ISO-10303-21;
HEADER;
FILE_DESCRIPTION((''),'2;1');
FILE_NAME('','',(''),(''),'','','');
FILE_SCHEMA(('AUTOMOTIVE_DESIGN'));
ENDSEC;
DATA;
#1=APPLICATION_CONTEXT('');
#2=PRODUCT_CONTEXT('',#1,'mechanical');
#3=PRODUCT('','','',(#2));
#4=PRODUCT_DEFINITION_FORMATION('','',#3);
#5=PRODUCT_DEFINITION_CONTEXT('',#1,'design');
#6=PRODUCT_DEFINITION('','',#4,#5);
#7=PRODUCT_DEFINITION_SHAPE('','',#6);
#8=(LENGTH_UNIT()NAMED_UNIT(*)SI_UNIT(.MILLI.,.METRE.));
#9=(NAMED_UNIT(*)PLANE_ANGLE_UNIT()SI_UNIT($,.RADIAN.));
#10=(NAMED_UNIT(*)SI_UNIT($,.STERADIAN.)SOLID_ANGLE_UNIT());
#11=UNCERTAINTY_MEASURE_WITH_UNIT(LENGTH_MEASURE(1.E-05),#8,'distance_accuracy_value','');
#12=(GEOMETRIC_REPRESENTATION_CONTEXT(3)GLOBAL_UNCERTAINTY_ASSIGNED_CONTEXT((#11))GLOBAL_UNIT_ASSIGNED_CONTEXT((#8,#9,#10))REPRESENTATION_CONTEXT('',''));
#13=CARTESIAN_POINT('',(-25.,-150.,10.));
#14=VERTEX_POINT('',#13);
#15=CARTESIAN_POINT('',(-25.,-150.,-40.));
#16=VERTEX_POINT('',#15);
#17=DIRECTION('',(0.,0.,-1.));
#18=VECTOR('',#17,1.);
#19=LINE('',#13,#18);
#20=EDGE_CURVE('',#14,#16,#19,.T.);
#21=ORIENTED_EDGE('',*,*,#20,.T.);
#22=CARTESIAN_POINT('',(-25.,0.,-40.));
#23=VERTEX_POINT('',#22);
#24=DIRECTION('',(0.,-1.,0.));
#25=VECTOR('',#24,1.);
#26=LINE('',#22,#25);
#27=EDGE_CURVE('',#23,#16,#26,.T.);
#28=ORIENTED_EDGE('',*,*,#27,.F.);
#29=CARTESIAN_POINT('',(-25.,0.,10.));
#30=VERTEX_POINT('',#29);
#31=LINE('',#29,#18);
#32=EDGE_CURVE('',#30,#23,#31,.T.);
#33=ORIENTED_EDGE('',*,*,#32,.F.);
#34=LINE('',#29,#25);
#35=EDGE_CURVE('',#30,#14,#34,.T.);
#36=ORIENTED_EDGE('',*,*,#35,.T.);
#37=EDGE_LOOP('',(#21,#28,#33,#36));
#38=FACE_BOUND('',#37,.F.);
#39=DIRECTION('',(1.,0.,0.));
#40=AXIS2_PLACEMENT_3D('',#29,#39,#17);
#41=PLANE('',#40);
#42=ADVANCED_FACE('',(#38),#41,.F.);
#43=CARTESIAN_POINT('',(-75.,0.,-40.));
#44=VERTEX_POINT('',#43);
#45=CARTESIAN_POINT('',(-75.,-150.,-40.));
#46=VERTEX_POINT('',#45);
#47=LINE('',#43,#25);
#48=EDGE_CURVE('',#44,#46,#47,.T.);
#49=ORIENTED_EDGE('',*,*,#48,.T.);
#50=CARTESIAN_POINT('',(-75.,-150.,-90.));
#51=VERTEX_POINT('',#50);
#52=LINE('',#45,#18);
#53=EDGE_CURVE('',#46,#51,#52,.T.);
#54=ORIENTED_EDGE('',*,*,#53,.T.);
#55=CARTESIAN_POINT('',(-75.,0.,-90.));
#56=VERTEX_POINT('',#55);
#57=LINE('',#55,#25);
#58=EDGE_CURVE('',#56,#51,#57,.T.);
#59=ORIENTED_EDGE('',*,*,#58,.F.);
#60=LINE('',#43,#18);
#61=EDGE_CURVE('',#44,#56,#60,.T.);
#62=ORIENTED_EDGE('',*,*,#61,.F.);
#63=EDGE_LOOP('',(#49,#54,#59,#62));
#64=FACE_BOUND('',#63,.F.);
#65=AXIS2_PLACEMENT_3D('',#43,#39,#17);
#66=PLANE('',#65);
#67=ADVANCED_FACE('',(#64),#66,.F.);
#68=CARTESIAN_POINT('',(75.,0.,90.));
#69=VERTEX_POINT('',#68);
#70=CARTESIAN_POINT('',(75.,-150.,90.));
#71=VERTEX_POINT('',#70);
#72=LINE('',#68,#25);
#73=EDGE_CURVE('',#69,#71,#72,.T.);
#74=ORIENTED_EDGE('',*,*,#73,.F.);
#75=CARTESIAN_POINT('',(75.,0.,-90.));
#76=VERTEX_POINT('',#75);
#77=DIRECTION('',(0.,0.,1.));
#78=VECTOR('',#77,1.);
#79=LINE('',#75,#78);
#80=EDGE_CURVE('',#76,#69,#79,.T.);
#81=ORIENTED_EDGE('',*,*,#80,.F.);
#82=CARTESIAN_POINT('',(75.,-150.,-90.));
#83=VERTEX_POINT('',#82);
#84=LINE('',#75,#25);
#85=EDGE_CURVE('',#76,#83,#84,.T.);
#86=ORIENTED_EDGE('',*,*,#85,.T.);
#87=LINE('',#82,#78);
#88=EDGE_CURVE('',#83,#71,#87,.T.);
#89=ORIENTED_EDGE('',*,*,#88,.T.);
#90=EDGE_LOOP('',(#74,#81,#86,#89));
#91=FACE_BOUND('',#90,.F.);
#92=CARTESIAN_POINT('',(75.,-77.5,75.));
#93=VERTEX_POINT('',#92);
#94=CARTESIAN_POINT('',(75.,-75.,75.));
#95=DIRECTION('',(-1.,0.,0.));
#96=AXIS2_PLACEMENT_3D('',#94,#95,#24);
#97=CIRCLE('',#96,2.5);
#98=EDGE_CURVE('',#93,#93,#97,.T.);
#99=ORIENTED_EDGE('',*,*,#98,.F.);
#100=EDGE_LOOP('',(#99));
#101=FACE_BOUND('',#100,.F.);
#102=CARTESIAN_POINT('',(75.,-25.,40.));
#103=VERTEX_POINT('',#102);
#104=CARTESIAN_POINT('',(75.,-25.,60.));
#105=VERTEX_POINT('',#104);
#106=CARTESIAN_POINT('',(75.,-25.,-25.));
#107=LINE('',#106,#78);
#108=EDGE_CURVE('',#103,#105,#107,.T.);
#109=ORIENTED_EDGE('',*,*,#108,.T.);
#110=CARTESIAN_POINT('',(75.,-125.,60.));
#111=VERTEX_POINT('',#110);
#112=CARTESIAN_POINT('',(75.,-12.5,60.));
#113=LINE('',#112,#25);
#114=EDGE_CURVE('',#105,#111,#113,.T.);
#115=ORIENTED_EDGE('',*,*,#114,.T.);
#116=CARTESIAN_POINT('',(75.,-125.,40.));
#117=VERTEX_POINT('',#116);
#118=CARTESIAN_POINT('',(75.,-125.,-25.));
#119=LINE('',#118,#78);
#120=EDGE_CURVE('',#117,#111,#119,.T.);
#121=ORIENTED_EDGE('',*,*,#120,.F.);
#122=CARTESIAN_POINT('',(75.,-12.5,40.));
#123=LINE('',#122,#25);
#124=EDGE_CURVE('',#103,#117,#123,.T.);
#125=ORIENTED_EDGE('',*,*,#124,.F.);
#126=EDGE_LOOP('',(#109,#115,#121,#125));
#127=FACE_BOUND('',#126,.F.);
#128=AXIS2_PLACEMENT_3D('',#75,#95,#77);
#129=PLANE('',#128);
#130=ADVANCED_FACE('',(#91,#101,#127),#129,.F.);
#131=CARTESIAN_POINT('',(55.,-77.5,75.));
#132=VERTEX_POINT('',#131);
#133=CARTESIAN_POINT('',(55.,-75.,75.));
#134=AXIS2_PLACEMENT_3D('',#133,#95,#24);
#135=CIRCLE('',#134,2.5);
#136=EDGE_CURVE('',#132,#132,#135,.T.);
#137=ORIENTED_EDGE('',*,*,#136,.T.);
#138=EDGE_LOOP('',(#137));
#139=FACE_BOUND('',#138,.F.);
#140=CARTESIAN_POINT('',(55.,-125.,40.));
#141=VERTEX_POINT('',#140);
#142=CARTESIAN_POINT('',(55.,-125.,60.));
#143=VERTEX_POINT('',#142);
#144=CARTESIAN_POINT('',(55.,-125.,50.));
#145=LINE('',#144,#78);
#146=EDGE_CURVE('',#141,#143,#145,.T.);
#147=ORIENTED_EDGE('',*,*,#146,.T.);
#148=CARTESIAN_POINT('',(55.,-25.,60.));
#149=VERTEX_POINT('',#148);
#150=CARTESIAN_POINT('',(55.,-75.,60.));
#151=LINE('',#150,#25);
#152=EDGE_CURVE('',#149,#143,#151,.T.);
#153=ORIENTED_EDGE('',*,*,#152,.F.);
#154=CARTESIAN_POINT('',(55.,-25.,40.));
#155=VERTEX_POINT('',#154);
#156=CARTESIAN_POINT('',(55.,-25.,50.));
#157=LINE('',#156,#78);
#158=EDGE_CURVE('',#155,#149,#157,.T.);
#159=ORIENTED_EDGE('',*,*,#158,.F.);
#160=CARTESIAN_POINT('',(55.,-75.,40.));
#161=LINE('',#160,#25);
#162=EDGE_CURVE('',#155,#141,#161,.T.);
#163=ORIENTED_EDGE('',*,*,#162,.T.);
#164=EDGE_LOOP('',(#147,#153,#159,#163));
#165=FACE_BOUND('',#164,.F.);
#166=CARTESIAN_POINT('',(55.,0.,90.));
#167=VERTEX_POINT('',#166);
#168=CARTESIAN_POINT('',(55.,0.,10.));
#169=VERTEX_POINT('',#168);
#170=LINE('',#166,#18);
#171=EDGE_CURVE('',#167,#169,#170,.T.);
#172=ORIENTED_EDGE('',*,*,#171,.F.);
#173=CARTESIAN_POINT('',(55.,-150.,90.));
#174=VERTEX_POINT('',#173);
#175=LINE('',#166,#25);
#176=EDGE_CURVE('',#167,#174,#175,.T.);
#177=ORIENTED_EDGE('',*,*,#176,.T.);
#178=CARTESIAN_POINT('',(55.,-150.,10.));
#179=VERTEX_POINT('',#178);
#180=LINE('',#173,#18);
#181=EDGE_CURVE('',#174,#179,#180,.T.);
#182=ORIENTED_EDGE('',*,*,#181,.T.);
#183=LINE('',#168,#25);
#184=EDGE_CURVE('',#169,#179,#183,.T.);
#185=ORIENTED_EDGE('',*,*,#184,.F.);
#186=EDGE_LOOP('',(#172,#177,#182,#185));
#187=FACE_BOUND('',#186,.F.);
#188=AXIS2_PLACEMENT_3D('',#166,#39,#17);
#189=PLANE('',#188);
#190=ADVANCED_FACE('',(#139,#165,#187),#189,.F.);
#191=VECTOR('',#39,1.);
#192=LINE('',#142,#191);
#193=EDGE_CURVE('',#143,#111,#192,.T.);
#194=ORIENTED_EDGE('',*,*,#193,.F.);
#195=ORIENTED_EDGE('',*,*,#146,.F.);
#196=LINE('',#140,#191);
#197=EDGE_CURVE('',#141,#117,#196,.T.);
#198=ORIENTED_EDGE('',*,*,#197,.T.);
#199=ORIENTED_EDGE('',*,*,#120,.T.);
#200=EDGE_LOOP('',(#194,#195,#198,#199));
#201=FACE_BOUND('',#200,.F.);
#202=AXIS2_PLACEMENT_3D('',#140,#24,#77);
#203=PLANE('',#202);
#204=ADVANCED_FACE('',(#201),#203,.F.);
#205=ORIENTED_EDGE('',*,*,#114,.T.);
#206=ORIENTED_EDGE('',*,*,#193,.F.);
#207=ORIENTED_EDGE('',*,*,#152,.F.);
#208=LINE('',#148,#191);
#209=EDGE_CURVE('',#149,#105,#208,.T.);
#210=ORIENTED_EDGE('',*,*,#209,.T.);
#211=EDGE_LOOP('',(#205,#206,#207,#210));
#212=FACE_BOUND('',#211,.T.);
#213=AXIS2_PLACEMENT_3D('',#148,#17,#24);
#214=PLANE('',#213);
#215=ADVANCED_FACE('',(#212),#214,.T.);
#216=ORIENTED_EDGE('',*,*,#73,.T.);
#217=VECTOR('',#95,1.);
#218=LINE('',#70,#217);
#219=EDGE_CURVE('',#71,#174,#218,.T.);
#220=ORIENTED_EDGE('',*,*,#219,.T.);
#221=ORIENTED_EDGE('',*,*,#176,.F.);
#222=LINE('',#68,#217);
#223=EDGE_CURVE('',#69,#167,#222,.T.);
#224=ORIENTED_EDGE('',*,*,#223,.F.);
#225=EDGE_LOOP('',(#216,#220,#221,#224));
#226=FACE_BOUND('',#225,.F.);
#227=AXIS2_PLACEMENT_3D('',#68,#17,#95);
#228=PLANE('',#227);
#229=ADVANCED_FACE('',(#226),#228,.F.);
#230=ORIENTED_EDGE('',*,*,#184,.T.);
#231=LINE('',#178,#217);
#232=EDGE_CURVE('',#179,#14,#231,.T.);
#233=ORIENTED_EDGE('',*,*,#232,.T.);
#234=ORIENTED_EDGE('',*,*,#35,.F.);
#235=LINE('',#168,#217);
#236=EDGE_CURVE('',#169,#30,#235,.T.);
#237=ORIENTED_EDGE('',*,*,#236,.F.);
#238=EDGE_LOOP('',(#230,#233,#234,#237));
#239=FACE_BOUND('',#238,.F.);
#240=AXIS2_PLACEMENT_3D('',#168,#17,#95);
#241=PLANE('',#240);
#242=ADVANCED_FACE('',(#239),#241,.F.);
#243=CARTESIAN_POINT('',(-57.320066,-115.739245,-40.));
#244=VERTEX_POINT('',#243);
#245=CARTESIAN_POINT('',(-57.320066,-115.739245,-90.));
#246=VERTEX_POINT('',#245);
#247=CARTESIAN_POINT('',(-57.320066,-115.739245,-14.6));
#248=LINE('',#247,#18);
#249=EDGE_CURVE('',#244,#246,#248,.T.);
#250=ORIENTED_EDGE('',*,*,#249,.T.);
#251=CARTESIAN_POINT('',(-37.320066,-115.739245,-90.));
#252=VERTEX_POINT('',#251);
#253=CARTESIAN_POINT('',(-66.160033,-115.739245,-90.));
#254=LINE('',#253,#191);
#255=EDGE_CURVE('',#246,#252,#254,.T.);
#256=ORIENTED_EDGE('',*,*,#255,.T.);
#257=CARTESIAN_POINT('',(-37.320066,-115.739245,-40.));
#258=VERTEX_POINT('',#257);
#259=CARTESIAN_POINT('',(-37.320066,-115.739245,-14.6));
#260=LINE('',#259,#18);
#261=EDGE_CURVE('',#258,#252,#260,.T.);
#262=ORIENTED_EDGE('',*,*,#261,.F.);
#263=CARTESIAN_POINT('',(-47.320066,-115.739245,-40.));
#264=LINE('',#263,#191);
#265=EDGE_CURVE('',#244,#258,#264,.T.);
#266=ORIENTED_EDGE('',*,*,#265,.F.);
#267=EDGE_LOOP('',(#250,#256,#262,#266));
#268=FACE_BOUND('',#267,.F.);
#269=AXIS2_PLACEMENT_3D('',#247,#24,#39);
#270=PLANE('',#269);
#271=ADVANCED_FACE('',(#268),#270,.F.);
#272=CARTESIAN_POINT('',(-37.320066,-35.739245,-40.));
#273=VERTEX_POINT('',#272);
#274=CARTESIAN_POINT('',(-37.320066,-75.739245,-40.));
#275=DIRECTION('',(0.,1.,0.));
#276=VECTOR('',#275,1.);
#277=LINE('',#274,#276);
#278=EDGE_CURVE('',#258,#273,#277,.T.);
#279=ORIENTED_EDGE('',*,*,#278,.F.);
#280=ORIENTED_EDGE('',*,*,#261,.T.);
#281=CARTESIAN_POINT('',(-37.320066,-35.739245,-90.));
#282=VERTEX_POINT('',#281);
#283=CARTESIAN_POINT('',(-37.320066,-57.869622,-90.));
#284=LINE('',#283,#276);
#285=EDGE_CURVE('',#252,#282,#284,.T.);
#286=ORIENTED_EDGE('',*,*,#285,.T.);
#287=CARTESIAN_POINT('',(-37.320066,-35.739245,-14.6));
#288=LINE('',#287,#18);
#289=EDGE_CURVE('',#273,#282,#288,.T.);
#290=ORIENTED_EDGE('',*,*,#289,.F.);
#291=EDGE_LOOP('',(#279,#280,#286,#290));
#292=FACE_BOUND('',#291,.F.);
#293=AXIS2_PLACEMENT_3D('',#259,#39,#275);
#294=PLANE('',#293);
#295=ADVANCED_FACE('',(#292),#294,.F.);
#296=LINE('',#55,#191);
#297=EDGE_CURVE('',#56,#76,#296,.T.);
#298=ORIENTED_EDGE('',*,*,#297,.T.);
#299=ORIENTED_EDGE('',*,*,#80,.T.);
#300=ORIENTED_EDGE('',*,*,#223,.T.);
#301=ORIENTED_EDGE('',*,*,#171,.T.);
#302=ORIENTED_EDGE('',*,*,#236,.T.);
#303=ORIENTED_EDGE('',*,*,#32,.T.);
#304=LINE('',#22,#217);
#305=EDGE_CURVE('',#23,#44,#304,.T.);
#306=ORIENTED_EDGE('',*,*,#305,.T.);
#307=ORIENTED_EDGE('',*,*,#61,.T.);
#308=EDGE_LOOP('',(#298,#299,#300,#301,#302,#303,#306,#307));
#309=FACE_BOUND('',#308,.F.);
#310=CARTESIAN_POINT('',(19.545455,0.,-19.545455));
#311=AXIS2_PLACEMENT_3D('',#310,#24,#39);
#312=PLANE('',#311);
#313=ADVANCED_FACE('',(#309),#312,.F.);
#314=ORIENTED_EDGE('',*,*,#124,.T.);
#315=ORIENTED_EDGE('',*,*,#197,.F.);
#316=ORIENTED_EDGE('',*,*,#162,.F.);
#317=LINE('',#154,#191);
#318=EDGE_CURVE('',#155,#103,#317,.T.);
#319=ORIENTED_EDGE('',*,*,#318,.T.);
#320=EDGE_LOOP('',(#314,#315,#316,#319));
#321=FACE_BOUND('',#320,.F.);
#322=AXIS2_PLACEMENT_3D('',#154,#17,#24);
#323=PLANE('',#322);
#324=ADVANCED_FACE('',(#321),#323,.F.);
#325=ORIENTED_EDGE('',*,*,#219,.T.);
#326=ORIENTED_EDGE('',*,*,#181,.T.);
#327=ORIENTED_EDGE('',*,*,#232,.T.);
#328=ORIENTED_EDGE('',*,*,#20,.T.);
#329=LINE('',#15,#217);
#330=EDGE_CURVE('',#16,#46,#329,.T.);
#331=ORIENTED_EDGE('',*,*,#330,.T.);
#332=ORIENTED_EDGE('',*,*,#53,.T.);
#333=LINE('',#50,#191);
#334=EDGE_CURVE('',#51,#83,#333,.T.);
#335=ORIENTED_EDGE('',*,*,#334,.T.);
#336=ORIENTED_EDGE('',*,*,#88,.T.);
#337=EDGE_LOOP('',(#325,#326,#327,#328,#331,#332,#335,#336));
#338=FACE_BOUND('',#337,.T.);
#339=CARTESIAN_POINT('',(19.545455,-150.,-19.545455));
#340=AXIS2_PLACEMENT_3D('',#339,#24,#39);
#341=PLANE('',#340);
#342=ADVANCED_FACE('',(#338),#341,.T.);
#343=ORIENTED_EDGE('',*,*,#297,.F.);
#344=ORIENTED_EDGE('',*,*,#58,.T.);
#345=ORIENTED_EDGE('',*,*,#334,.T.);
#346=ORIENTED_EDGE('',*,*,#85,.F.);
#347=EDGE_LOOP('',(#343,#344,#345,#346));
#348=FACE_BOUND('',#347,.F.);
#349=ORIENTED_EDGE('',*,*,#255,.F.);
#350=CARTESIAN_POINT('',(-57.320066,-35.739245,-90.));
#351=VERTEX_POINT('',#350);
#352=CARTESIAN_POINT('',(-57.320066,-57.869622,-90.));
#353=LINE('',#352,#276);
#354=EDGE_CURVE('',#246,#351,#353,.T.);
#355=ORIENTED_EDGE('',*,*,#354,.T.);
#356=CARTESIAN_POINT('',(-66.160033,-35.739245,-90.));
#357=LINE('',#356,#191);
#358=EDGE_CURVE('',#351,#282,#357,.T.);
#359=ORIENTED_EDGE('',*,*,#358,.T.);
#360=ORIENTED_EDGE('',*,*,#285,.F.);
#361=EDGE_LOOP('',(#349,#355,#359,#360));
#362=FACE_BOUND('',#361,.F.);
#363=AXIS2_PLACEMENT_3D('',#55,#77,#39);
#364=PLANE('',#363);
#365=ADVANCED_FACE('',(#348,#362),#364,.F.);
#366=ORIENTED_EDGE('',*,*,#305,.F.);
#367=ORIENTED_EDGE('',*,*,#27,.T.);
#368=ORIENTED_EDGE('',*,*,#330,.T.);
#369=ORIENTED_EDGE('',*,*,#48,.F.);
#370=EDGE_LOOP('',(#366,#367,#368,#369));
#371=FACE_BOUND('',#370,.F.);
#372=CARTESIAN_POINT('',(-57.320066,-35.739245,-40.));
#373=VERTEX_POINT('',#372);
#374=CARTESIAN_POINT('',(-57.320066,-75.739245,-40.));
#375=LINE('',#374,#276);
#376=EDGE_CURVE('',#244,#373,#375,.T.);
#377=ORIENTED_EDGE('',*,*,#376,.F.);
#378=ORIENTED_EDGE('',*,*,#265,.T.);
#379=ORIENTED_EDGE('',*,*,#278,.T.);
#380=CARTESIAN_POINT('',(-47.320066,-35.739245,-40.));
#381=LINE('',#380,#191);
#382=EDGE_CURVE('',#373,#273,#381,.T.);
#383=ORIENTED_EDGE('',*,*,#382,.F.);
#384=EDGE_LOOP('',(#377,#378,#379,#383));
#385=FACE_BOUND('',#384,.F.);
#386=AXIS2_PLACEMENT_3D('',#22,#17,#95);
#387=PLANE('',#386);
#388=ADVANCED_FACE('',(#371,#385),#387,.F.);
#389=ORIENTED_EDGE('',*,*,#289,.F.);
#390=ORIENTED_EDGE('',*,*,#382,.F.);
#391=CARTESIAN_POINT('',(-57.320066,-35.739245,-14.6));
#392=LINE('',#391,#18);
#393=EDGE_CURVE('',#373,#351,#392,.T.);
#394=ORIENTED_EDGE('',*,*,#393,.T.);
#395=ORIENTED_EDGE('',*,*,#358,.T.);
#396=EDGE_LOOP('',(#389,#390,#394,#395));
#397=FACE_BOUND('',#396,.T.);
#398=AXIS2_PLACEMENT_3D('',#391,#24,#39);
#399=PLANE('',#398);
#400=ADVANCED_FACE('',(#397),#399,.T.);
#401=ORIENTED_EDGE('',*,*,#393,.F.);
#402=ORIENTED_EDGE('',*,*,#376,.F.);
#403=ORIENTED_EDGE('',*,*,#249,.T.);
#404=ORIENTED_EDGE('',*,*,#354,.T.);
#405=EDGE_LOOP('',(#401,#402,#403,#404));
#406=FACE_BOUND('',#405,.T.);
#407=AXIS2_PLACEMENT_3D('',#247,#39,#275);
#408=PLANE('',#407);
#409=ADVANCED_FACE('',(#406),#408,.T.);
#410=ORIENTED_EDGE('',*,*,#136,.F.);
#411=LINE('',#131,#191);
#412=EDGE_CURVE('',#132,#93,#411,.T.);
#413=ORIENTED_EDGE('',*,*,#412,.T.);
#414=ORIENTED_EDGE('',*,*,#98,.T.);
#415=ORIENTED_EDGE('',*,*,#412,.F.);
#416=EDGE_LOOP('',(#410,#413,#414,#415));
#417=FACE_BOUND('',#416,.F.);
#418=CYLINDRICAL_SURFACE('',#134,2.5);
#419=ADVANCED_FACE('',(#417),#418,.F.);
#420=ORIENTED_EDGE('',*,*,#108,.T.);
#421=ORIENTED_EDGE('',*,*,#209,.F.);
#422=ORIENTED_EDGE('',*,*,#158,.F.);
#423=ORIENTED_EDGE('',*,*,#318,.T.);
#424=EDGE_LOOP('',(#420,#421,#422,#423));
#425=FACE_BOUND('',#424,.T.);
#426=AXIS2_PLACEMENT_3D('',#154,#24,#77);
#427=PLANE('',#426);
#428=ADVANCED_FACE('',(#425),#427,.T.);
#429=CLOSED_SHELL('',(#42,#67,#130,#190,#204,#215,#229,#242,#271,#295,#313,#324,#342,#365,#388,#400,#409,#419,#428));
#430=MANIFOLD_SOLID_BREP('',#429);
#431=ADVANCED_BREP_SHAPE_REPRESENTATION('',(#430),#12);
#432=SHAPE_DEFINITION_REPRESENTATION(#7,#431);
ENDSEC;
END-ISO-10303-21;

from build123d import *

# Parameters (mm, degrees)
F1_DEPTH = 150
F2_W     = 100
F2_H     = 20
F3_DEPTH = 20.001
F4_R     = 2.5
F5_DEPTH = 20.001
F6_W     = 20
F6_H     = 80
F7_DEPTH = 25.4
F8_W     = 20
F8_H     = 80
F9_DEPTH = 75.401


with BuildPart() as f1:
    # F0 (on Front) → F1 (new body)
    with BuildSketch(Plane.XZ):
        Polygon((75, -90), (75, 90), (55, 90), (55, 10), (-25, 10), (-25, -40), (-75, -40), (-75, -90), align=None)
    extrude(amount=F1_DEPTH)

    # F2 (on face) → F3 (cut, through all)
    with BuildSketch(Plane(origin=(55, 0, 0), x_dir=(0, -1, 0), z_dir=(-1, 0, 0))):
        with Locations((75, 50)):
            Rectangle(F2_W, F2_H)
    extrude(amount=-F3_DEPTH, mode=Mode.SUBTRACT)

    # F4 (on face) → F5 (cut, through all)
    with BuildSketch(Plane(origin=(55, 0, 0), x_dir=(0, -1, 0), z_dir=(-1, 0, 0))):
        with Locations((75, 75)):
            Circle(F4_R)
    extrude(amount=-F5_DEPTH, mode=Mode.SUBTRACT)

    # F6 (on face) → F7 (join)
    with BuildSketch(Plane.XY.offset(-40)):
        with Locations((-47.3200663872, -75.7392449304)):
            Rectangle(F6_W, F6_H)
    extrude(amount=F7_DEPTH)

    # F8 (on face) → F9 (cut, through all)
    with BuildSketch(Plane.XY.offset(-14.6)):
        with Locations((-47.3200663872, -75.7392449304)):
            Rectangle(F8_W, F8_H)
    extrude(amount=-F9_DEPTH, mode=Mode.SUBTRACT)


solid = f1.part
